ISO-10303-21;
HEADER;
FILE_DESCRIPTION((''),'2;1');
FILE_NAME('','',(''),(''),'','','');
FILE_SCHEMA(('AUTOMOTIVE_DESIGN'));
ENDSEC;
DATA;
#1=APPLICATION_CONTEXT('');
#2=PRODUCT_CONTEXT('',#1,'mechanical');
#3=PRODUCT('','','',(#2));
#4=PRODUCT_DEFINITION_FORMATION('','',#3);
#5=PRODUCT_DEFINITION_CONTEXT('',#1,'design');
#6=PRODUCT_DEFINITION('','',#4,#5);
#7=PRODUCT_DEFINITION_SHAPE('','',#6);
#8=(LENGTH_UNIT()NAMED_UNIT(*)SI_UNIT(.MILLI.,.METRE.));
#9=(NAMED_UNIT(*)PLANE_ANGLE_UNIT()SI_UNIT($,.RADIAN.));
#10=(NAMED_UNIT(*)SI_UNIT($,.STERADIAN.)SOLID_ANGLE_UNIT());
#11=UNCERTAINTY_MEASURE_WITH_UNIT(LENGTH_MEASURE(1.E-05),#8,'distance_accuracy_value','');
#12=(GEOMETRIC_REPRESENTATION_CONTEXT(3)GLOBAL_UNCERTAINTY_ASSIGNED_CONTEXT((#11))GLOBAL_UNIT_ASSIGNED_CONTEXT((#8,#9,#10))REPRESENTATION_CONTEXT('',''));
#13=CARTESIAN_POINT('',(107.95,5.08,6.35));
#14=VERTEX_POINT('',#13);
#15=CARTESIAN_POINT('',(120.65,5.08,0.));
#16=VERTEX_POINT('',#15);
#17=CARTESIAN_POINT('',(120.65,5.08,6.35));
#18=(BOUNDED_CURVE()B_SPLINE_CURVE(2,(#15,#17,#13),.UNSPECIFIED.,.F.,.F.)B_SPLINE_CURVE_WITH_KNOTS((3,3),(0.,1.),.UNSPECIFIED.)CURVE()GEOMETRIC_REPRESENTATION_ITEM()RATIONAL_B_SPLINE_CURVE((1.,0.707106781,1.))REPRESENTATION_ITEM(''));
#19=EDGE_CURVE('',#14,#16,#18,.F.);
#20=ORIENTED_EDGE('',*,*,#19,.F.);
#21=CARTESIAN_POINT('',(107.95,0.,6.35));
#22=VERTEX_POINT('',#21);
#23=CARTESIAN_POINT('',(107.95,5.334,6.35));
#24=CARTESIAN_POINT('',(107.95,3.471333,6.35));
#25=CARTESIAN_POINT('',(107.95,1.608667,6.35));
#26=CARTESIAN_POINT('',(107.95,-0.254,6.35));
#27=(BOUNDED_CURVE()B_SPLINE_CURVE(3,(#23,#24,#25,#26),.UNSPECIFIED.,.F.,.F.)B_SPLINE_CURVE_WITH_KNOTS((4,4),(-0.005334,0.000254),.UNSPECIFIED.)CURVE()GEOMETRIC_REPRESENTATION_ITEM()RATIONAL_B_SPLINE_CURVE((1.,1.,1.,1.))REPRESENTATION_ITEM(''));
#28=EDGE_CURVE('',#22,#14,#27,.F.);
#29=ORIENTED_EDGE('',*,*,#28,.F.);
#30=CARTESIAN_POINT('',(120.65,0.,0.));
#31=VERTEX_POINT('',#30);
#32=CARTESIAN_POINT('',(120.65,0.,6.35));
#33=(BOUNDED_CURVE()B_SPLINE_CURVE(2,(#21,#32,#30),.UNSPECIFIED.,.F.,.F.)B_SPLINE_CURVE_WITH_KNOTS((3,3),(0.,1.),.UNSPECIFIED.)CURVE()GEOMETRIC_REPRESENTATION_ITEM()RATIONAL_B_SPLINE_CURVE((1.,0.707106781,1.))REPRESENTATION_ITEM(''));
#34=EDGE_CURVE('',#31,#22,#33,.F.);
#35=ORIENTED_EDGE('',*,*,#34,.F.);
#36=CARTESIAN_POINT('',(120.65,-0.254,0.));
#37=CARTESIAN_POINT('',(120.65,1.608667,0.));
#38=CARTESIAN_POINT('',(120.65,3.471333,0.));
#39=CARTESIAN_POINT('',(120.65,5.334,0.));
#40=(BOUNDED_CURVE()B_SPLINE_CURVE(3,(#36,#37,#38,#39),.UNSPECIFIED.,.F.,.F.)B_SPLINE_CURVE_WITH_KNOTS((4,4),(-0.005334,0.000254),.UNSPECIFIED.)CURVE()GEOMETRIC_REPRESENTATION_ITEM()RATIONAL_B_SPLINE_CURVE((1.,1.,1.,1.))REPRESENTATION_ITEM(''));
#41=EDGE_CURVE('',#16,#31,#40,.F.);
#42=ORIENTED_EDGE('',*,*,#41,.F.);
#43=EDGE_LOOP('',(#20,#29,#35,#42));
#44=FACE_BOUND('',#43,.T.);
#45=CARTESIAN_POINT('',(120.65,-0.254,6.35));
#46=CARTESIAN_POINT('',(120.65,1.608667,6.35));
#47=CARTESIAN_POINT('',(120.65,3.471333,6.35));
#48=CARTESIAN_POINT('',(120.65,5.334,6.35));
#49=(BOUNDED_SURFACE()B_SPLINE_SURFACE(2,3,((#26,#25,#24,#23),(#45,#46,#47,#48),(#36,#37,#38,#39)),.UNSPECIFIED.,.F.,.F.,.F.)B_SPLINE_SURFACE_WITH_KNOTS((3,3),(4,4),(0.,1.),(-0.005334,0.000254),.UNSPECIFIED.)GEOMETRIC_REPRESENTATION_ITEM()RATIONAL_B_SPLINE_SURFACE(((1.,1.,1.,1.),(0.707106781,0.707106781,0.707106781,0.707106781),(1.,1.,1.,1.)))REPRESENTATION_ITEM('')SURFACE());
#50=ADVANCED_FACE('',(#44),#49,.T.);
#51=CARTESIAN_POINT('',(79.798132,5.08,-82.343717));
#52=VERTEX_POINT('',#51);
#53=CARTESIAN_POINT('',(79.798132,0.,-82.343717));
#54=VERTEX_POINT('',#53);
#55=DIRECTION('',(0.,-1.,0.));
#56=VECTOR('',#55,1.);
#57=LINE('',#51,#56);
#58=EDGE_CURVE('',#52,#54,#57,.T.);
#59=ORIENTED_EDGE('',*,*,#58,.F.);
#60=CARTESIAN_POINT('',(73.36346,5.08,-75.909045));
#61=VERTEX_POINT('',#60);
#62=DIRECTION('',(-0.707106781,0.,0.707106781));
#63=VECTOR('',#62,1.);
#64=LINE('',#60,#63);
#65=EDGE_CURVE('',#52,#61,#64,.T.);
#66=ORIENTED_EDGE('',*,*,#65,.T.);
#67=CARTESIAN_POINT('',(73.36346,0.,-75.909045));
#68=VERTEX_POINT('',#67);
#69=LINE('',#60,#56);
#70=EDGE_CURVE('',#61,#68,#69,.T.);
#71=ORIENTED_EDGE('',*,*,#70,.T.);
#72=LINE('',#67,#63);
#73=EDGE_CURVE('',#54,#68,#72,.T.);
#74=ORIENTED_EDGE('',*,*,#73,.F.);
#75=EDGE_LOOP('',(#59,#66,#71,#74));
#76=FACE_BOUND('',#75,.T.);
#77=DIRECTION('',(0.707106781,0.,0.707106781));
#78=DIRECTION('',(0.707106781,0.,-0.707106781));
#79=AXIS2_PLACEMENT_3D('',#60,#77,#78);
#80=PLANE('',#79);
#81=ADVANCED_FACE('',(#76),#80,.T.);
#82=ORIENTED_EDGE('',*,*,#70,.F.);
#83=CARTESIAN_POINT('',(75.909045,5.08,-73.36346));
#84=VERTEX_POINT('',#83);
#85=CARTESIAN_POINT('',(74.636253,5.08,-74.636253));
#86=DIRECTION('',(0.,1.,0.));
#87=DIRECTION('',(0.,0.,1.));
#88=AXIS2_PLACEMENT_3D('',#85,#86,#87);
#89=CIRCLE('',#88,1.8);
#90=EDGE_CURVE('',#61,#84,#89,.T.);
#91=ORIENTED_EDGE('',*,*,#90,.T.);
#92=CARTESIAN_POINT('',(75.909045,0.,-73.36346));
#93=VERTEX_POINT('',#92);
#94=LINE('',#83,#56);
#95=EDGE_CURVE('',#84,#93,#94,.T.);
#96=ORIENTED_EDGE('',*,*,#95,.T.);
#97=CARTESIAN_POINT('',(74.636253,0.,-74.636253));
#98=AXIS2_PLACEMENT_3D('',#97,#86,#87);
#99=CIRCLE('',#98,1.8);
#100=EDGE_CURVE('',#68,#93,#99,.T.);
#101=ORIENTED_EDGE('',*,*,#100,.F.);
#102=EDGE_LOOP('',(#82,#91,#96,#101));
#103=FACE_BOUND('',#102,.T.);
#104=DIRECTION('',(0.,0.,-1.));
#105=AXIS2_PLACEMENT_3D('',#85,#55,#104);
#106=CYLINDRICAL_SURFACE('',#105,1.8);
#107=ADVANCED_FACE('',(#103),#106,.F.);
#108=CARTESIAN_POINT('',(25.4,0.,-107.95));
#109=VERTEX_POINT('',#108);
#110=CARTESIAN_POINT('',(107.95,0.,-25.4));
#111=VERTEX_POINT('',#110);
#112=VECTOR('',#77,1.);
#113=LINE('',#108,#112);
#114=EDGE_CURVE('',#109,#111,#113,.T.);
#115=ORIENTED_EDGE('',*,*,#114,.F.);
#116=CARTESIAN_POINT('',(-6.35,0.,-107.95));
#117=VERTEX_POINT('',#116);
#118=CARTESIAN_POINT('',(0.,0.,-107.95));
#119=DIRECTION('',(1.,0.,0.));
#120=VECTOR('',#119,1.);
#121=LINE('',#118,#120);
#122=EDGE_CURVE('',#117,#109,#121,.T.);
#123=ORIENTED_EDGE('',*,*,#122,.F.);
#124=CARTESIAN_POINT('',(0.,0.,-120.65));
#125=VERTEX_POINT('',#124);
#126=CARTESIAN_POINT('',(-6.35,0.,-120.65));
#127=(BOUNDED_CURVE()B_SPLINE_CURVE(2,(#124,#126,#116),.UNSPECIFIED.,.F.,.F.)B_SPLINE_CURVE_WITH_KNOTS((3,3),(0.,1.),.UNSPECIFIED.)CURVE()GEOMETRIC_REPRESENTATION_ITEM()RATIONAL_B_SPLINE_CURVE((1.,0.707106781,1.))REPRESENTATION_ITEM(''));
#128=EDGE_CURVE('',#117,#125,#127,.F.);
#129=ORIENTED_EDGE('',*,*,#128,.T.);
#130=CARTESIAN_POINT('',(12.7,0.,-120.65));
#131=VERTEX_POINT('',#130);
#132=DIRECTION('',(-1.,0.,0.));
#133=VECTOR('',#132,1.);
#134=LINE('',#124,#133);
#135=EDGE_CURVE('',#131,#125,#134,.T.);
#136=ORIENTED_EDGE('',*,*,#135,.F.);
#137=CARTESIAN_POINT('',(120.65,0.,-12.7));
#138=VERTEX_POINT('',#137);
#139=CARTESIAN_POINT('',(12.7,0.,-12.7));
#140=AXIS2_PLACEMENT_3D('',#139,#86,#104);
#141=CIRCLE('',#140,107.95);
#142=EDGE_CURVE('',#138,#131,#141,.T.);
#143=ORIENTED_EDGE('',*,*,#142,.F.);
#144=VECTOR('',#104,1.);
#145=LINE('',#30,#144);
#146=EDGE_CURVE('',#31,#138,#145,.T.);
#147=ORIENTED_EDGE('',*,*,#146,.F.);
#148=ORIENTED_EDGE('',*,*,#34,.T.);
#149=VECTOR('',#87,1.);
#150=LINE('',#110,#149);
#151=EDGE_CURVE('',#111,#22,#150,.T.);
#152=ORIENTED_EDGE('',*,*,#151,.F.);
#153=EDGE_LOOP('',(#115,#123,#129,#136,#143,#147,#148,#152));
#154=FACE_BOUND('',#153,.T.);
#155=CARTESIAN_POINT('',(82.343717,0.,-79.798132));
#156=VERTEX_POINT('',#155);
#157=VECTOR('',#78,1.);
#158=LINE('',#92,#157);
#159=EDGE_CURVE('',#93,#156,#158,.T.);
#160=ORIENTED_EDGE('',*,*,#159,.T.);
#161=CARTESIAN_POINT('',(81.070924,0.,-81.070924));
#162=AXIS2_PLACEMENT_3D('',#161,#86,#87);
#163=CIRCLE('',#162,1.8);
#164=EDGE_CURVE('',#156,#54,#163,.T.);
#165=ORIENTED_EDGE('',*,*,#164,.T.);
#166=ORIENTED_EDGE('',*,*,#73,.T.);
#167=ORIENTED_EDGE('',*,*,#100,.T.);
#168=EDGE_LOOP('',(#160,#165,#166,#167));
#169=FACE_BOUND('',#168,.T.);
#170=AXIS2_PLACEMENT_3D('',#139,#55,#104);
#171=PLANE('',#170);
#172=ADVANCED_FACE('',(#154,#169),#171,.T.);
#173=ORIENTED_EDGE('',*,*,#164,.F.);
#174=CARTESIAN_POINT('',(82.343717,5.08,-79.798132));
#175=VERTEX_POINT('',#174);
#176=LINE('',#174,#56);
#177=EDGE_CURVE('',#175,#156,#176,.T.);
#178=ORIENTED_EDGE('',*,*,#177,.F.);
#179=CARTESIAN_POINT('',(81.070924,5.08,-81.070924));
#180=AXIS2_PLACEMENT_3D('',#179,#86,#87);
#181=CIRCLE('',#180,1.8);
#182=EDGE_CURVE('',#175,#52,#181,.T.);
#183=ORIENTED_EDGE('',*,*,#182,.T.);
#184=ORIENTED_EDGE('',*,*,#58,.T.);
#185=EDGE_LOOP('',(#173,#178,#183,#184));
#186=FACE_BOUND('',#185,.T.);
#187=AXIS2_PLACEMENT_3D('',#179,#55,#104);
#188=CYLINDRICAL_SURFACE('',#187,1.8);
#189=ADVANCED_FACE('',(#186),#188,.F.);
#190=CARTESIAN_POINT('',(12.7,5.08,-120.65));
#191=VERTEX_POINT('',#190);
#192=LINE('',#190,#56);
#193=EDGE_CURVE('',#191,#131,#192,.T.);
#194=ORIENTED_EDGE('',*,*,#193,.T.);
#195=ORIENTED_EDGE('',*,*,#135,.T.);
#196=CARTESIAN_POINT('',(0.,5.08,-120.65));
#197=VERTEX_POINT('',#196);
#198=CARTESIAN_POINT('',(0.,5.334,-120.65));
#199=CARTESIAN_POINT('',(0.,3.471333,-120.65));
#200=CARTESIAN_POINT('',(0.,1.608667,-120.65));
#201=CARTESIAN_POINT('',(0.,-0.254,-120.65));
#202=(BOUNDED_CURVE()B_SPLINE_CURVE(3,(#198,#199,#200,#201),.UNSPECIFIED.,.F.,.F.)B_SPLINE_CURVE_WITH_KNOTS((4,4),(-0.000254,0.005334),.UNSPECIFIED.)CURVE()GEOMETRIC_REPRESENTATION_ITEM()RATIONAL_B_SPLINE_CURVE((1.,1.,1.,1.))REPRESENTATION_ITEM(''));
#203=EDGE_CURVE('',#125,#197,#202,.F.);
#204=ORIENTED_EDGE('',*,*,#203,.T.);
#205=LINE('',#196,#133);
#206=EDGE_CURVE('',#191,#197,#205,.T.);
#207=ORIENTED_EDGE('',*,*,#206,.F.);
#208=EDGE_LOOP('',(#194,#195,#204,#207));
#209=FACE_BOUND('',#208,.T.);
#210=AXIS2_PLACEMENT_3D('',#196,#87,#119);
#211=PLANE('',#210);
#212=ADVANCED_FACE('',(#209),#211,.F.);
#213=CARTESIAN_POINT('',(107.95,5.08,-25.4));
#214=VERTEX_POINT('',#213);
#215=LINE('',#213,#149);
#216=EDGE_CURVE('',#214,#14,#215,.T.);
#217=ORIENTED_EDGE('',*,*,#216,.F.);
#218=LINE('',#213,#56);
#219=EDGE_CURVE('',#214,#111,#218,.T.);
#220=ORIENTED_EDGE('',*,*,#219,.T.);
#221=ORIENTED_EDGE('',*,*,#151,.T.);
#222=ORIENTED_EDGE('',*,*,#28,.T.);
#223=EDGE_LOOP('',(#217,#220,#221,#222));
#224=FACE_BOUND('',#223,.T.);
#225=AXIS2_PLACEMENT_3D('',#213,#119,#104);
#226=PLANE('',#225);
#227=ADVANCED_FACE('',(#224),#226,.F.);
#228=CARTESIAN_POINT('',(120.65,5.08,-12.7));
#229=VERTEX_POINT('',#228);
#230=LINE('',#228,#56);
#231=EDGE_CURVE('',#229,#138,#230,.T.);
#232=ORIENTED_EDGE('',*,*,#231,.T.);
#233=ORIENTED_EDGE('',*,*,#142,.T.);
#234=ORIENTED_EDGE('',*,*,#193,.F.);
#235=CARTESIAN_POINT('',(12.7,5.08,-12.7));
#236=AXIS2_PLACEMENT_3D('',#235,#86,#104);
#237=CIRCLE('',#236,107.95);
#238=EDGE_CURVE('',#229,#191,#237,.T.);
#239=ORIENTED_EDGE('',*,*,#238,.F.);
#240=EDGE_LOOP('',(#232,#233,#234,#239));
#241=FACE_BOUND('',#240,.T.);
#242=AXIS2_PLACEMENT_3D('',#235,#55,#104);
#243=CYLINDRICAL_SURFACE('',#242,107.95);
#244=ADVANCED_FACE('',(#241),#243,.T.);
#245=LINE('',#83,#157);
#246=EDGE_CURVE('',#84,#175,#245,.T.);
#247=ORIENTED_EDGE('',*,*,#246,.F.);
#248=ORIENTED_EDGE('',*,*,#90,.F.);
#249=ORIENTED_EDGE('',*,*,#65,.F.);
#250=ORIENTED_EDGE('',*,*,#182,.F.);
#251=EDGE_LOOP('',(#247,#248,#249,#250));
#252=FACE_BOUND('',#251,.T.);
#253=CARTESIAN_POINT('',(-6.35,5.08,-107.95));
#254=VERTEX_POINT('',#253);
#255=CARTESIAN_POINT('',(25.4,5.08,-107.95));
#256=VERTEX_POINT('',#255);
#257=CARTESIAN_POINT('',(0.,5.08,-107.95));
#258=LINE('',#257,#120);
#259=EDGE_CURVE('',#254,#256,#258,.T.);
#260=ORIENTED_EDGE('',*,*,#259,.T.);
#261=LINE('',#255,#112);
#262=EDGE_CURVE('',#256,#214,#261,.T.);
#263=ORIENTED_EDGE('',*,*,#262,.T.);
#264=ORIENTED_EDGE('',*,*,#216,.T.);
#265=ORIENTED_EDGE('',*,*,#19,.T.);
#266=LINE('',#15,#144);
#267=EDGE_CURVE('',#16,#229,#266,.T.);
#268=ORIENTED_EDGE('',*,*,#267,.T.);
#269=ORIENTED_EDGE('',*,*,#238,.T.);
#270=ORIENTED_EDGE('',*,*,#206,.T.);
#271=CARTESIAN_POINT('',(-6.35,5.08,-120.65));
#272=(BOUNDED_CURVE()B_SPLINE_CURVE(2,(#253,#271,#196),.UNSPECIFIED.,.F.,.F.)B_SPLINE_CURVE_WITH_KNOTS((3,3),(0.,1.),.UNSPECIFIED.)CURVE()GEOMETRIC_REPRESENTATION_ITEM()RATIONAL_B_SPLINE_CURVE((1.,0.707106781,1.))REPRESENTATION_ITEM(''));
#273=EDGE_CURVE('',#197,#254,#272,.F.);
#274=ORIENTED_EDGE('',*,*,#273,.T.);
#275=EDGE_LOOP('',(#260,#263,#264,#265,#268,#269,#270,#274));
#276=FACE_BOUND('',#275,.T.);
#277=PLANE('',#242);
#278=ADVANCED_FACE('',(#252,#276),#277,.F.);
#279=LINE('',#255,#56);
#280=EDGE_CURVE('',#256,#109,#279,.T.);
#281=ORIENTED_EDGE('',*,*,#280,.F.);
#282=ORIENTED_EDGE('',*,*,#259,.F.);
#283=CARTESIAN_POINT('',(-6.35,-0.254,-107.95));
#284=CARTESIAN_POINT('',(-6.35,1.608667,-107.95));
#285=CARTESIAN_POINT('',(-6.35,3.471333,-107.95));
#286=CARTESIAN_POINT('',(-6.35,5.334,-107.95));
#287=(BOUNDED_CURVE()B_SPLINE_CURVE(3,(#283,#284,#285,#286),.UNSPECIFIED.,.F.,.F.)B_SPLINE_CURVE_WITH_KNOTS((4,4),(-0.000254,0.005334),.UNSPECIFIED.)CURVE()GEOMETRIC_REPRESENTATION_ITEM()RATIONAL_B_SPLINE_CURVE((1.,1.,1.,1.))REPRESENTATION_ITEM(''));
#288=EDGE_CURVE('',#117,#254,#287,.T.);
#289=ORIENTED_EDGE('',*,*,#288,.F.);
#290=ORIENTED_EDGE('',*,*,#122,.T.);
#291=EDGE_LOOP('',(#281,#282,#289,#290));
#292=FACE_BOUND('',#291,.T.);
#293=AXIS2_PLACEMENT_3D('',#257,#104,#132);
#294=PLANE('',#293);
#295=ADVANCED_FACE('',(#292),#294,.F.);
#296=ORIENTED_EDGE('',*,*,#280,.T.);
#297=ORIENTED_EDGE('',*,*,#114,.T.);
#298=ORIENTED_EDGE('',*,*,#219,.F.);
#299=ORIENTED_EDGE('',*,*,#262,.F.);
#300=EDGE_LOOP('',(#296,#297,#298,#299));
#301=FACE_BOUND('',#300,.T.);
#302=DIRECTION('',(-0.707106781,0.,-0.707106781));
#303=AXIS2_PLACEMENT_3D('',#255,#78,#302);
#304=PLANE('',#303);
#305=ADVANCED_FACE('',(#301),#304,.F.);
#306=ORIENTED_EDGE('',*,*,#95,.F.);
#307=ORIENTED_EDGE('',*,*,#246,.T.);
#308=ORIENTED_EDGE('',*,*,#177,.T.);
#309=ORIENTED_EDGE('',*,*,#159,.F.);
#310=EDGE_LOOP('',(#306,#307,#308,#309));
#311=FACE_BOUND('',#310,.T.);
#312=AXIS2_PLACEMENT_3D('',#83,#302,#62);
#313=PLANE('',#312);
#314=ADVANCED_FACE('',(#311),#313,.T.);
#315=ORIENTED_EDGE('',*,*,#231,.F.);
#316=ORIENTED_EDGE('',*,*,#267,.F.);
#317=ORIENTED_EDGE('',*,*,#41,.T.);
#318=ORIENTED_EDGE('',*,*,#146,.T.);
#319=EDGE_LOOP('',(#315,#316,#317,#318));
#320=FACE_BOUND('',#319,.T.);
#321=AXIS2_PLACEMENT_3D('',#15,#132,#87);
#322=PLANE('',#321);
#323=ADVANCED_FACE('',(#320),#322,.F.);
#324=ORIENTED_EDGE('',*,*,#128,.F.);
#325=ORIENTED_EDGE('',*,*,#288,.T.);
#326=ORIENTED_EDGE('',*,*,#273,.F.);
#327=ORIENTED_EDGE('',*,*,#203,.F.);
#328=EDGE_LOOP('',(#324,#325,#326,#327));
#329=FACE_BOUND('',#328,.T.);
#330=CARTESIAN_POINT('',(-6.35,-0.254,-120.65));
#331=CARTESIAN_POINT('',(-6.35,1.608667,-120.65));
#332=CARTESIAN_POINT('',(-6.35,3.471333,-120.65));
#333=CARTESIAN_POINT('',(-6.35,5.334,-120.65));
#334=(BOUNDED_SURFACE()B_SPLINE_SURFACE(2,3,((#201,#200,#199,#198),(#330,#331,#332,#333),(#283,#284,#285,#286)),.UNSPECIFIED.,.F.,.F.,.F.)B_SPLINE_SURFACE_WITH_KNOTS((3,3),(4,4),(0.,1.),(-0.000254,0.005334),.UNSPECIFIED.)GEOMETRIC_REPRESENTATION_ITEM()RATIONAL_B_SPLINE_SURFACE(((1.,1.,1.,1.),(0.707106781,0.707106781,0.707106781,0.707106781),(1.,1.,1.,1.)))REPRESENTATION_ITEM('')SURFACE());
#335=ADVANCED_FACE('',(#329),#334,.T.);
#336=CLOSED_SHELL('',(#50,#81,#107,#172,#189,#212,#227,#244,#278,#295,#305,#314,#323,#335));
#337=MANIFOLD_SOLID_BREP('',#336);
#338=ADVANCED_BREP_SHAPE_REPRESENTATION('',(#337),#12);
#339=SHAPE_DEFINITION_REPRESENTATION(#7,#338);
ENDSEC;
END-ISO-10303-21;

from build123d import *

# Parameters (mm, degrees)
BOSS_EXTRUDE1_DEPTH = 5.08
SKETCH2_W           = 12.7
SKETCH2_H           = 5.08
BOSS_EXTRUDE2_DEPTH = 6.35
FILLET3_SIZE        = 6.35
FILLET3_SIZE_2      = 12.7
FILLET4_SIZE        = 6.35
FILLET4_SIZE_2      = 12.7


with BuildPart() as part:
    # Sketch1 → Boss-Extrude1 (new body)
    with BuildSketch(Plane(origin=(0, 0, 0), x_dir=(1, 0, 0), z_dir=(0, 1, 0))):
        with BuildLine():
            Line((0, 120.65), (12.7, 120.65))
            ThreePointArc((12.7, 120.65), (89.032177029, 89.032177029), (120.65, 12.7))
            Line((120.65, 12.7), (120.65, 0))
            Line((120.65, 0), (107.95, 0))
            Line((107.95, 0), (107.95, 25.4))
            Line((107.95, 25.4), (25.4, 107.95))
            Line((25.4, 107.95), (0, 107.95))
            Line((0, 107.95), (0, 120.65))
        make_face()
        with BuildLine():
            Line((73.363460454, 75.909044866), (79.798132163, 82.343716575))
            ThreePointArc((79.798132163, 82.343716575), (82.343716575, 82.343716575), (82.343716575, 79.798132163))
            Line((82.343716575, 79.798132163), (75.909044866, 73.363460454))
            ThreePointArc((75.909044866, 73.363460454), (73.363460454, 73.363460454), (73.363460454, 75.909044866))
        make_face(mode=Mode.SUBTRACT)
    extrude(amount=BOSS_EXTRUDE1_DEPTH)

    # Sketch2 → Boss-Extrude2 (add)
    with BuildSketch(Plane.ZY):
        with Locations((-114.3, 2.54)):
            Rectangle(SKETCH2_W, SKETCH2_H)
    boss_extrude2 = extrude(amount=BOSS_EXTRUDE2_DEPTH)

    # Mirror2: Boss-Extrude2 across plane
    add(boss_extrude2.mirror(Plane(origin=(0, 0, 0), x_dir=(-0.7071067811865479, 0, 0.7071067811865471), z_dir=(0.7071067811865471, 0, 0.7071067811865479))))

    # Fillet3
    # an asymmetric fillet: 12.7, 6.35 mm, written as the material it takes off along each edge
    with BuildSketch(Plane(origin=(-6.35, 36.83, -120.65), x_dir=(1, 0, 0), z_dir=(0, -1, 0))) as fillet3_piece_1:
        with BuildLine():
            Bezier((FILLET3_SIZE, 0), (0, 0), (0, FILLET3_SIZE_2), weights=[1, 0.707106781, 1])
            Line((0, FILLET3_SIZE_2), (0, 0))
            Line((0, 0), (FILLET3_SIZE, 0))
        make_face()
    extrude(amount=68.58, mode=Mode.SUBTRACT)

    # Fillet4
    # an asymmetric fillet: 12.7, 6.35 mm, written as the material it takes off along each edge
    with BuildSketch(Plane(origin=(120.65, 36.83, 6.35), x_dir=(0, 0, -1), z_dir=(0, -1, 0))) as fillet4_piece_1:
        with BuildLine():
            Bezier((FILLET4_SIZE, 0), (0, 0), (0, -FILLET4_SIZE_2), weights=[1, 0.707106781, 1])
            Line((0, -FILLET4_SIZE_2), (0, 0))
            Line((0, 0), (FILLET4_SIZE, 0))
        make_face()
    extrude(amount=68.58, mode=Mode.SUBTRACT)


solid = part.part
